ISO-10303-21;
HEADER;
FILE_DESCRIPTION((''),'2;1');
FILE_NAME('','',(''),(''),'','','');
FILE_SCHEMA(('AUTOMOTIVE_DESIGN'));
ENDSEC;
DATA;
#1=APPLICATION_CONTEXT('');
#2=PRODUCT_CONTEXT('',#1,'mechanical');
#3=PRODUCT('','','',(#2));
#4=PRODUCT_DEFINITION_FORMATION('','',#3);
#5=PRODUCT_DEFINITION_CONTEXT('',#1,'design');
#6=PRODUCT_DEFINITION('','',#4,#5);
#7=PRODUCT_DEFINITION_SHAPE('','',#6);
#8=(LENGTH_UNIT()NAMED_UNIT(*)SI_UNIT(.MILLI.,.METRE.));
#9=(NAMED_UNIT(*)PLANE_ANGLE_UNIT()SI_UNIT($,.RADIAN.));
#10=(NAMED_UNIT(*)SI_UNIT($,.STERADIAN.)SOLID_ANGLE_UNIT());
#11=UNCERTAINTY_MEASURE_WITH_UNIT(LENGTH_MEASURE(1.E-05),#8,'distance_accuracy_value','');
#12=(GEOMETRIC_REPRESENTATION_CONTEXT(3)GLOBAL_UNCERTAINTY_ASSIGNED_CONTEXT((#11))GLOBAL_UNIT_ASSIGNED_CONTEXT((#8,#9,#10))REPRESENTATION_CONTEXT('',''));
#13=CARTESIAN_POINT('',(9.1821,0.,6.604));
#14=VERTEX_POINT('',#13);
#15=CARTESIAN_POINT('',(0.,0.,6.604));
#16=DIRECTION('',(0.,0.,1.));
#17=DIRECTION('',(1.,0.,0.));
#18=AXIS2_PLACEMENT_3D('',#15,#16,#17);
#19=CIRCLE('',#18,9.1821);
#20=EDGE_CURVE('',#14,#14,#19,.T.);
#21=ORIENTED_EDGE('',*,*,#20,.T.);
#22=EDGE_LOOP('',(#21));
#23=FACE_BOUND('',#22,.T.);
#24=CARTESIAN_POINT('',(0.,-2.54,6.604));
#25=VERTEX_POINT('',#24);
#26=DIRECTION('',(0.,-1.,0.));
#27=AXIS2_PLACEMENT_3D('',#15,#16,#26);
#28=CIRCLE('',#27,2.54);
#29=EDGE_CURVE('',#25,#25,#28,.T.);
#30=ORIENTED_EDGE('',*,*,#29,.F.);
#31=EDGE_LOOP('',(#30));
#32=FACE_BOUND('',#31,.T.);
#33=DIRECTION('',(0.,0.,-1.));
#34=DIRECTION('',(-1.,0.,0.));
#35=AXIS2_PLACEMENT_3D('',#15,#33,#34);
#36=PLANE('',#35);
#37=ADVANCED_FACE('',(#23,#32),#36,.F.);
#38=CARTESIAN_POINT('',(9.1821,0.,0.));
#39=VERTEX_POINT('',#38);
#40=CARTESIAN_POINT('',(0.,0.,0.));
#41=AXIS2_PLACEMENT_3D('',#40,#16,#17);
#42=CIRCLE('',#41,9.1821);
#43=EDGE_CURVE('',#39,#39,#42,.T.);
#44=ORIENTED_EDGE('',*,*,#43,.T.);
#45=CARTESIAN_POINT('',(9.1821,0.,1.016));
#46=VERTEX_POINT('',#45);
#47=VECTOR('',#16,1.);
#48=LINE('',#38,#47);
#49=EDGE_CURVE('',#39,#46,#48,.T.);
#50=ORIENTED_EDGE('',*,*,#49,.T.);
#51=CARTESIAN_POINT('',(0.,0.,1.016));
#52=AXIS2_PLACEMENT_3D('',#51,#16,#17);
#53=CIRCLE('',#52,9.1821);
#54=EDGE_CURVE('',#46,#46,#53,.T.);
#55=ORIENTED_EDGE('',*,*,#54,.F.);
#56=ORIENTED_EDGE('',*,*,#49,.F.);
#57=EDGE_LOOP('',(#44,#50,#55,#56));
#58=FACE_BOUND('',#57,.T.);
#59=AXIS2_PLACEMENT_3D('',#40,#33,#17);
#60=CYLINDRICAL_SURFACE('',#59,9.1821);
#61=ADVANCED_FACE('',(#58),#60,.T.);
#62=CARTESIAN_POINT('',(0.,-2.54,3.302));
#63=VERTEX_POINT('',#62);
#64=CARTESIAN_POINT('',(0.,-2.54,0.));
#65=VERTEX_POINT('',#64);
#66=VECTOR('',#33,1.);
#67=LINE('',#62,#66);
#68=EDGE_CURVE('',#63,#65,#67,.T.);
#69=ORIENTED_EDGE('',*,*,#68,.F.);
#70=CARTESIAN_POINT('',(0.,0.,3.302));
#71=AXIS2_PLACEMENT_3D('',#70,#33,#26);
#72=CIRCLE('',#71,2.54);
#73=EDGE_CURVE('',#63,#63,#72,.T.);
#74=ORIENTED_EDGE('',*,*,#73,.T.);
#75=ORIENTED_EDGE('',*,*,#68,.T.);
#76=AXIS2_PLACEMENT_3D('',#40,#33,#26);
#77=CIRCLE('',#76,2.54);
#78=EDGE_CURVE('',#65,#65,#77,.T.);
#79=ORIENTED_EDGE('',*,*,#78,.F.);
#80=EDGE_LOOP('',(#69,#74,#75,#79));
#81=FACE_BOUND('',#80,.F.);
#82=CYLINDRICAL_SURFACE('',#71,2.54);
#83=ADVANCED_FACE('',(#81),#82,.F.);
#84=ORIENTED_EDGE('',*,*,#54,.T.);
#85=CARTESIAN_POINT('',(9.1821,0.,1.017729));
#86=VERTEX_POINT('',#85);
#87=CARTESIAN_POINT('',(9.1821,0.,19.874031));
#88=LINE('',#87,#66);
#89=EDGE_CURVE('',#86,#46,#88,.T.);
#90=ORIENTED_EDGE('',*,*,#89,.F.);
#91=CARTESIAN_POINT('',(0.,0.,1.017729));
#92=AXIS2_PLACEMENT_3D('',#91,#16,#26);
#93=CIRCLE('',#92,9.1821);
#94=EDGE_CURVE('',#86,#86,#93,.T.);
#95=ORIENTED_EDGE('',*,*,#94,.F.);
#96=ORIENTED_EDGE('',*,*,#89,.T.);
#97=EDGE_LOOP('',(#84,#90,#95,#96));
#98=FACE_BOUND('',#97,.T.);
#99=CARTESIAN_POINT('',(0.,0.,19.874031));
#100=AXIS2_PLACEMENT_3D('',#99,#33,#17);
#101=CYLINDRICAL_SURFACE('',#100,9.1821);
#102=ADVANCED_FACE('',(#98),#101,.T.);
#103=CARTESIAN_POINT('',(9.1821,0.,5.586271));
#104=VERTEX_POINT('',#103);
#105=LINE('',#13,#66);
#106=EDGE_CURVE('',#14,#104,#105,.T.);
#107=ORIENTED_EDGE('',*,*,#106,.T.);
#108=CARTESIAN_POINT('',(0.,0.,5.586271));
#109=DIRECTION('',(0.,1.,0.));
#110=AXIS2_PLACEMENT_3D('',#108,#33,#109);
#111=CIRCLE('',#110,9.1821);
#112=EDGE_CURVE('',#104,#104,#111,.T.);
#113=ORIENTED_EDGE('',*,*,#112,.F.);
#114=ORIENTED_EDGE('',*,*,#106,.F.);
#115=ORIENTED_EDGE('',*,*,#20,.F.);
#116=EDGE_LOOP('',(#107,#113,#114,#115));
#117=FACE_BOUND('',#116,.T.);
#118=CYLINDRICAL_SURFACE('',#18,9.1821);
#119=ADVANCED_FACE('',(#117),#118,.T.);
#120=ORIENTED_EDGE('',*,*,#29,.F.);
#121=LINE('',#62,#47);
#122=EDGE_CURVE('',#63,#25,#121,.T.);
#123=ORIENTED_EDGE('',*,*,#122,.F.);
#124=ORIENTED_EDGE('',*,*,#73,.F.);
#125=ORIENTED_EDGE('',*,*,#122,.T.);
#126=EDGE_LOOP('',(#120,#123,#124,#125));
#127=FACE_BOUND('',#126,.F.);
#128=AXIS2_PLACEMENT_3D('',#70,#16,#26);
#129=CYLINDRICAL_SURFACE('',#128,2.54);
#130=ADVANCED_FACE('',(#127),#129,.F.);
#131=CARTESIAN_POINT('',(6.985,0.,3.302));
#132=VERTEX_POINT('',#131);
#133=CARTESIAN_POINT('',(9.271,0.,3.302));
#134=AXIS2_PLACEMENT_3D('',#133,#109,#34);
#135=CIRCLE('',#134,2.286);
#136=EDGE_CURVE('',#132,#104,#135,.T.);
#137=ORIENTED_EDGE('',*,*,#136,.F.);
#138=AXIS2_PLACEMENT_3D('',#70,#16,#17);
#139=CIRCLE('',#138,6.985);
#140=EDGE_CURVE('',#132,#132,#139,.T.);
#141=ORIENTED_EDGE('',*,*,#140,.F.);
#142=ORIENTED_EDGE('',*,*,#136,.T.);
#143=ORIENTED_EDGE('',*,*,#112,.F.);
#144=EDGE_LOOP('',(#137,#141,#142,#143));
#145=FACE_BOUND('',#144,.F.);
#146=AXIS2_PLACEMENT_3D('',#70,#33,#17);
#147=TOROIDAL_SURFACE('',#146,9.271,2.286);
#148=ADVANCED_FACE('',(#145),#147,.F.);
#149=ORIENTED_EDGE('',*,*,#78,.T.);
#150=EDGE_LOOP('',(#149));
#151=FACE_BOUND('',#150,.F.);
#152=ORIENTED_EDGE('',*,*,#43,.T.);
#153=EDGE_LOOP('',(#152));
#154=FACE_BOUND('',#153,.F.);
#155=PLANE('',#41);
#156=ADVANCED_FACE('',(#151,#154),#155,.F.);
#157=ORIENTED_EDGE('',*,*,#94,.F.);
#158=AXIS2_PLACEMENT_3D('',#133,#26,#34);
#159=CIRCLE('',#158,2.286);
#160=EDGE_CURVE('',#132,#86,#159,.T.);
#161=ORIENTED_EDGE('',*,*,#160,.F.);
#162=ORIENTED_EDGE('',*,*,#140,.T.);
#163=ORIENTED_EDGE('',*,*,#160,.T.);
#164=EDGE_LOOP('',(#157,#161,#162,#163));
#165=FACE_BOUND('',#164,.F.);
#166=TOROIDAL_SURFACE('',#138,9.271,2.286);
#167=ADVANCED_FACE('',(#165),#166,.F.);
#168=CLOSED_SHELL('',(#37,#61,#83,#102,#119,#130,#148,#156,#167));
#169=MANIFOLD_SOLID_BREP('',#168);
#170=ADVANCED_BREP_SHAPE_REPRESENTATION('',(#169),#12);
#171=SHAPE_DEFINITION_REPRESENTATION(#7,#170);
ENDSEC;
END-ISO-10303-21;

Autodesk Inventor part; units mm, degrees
ref_plane "YZ Plane" through (0, 0, 0) normal (1, 0, 0) x (0, 1, 0)
ref_plane "XZ Plane" through (0, 0, 0) normal (0, 1, 0) x (-1, 0, 0)
ref_plane "XY Plane" through (0, 0, 0) normal (0, 0, 1) x (1, 0, 0)
sketch "Sketch1" plane through (0, 0, 0) normal (0, 0, 1) x (1, 0, 0)
  circle A0 centre (0, 0) radius 9.1821
  dimension "d0" = 18.3642
extrude "Extrusion1" add sketch "Sketch1" along normal blind 1.016
sketch "Sketch2" plane through (0, 0, 1.016) normal (0, 0, 1) x (1, 0, 0)
  circle A0 centre (0, 0) radius 6.985
  dimension "d3" = 13.97
extrude "Extrusion2" add sketch "Sketch2" along normal blind 2.286
sketch "Sketch3" plane through (0, 0, 3.302) normal (0, 0, 1) x (1, 0, 0)
  point P0 (0, 0)
hole "Hole1" at (0, 0, 3.302) direction (0, 0, -1) diameter 5.08 depth 25.4 tip angle 118
mirror "Mirror1" about plane through (0, 0, 3.302) normal (0, 0, 1) of "Extrusion2", "Extrusion1", "Hole1"
fillet "Fillet1" radius 2.286 2 edges at (-6.985, 0, 1.016) (-6.985, 0, 5.588)
properties part number "pulley alpha"
